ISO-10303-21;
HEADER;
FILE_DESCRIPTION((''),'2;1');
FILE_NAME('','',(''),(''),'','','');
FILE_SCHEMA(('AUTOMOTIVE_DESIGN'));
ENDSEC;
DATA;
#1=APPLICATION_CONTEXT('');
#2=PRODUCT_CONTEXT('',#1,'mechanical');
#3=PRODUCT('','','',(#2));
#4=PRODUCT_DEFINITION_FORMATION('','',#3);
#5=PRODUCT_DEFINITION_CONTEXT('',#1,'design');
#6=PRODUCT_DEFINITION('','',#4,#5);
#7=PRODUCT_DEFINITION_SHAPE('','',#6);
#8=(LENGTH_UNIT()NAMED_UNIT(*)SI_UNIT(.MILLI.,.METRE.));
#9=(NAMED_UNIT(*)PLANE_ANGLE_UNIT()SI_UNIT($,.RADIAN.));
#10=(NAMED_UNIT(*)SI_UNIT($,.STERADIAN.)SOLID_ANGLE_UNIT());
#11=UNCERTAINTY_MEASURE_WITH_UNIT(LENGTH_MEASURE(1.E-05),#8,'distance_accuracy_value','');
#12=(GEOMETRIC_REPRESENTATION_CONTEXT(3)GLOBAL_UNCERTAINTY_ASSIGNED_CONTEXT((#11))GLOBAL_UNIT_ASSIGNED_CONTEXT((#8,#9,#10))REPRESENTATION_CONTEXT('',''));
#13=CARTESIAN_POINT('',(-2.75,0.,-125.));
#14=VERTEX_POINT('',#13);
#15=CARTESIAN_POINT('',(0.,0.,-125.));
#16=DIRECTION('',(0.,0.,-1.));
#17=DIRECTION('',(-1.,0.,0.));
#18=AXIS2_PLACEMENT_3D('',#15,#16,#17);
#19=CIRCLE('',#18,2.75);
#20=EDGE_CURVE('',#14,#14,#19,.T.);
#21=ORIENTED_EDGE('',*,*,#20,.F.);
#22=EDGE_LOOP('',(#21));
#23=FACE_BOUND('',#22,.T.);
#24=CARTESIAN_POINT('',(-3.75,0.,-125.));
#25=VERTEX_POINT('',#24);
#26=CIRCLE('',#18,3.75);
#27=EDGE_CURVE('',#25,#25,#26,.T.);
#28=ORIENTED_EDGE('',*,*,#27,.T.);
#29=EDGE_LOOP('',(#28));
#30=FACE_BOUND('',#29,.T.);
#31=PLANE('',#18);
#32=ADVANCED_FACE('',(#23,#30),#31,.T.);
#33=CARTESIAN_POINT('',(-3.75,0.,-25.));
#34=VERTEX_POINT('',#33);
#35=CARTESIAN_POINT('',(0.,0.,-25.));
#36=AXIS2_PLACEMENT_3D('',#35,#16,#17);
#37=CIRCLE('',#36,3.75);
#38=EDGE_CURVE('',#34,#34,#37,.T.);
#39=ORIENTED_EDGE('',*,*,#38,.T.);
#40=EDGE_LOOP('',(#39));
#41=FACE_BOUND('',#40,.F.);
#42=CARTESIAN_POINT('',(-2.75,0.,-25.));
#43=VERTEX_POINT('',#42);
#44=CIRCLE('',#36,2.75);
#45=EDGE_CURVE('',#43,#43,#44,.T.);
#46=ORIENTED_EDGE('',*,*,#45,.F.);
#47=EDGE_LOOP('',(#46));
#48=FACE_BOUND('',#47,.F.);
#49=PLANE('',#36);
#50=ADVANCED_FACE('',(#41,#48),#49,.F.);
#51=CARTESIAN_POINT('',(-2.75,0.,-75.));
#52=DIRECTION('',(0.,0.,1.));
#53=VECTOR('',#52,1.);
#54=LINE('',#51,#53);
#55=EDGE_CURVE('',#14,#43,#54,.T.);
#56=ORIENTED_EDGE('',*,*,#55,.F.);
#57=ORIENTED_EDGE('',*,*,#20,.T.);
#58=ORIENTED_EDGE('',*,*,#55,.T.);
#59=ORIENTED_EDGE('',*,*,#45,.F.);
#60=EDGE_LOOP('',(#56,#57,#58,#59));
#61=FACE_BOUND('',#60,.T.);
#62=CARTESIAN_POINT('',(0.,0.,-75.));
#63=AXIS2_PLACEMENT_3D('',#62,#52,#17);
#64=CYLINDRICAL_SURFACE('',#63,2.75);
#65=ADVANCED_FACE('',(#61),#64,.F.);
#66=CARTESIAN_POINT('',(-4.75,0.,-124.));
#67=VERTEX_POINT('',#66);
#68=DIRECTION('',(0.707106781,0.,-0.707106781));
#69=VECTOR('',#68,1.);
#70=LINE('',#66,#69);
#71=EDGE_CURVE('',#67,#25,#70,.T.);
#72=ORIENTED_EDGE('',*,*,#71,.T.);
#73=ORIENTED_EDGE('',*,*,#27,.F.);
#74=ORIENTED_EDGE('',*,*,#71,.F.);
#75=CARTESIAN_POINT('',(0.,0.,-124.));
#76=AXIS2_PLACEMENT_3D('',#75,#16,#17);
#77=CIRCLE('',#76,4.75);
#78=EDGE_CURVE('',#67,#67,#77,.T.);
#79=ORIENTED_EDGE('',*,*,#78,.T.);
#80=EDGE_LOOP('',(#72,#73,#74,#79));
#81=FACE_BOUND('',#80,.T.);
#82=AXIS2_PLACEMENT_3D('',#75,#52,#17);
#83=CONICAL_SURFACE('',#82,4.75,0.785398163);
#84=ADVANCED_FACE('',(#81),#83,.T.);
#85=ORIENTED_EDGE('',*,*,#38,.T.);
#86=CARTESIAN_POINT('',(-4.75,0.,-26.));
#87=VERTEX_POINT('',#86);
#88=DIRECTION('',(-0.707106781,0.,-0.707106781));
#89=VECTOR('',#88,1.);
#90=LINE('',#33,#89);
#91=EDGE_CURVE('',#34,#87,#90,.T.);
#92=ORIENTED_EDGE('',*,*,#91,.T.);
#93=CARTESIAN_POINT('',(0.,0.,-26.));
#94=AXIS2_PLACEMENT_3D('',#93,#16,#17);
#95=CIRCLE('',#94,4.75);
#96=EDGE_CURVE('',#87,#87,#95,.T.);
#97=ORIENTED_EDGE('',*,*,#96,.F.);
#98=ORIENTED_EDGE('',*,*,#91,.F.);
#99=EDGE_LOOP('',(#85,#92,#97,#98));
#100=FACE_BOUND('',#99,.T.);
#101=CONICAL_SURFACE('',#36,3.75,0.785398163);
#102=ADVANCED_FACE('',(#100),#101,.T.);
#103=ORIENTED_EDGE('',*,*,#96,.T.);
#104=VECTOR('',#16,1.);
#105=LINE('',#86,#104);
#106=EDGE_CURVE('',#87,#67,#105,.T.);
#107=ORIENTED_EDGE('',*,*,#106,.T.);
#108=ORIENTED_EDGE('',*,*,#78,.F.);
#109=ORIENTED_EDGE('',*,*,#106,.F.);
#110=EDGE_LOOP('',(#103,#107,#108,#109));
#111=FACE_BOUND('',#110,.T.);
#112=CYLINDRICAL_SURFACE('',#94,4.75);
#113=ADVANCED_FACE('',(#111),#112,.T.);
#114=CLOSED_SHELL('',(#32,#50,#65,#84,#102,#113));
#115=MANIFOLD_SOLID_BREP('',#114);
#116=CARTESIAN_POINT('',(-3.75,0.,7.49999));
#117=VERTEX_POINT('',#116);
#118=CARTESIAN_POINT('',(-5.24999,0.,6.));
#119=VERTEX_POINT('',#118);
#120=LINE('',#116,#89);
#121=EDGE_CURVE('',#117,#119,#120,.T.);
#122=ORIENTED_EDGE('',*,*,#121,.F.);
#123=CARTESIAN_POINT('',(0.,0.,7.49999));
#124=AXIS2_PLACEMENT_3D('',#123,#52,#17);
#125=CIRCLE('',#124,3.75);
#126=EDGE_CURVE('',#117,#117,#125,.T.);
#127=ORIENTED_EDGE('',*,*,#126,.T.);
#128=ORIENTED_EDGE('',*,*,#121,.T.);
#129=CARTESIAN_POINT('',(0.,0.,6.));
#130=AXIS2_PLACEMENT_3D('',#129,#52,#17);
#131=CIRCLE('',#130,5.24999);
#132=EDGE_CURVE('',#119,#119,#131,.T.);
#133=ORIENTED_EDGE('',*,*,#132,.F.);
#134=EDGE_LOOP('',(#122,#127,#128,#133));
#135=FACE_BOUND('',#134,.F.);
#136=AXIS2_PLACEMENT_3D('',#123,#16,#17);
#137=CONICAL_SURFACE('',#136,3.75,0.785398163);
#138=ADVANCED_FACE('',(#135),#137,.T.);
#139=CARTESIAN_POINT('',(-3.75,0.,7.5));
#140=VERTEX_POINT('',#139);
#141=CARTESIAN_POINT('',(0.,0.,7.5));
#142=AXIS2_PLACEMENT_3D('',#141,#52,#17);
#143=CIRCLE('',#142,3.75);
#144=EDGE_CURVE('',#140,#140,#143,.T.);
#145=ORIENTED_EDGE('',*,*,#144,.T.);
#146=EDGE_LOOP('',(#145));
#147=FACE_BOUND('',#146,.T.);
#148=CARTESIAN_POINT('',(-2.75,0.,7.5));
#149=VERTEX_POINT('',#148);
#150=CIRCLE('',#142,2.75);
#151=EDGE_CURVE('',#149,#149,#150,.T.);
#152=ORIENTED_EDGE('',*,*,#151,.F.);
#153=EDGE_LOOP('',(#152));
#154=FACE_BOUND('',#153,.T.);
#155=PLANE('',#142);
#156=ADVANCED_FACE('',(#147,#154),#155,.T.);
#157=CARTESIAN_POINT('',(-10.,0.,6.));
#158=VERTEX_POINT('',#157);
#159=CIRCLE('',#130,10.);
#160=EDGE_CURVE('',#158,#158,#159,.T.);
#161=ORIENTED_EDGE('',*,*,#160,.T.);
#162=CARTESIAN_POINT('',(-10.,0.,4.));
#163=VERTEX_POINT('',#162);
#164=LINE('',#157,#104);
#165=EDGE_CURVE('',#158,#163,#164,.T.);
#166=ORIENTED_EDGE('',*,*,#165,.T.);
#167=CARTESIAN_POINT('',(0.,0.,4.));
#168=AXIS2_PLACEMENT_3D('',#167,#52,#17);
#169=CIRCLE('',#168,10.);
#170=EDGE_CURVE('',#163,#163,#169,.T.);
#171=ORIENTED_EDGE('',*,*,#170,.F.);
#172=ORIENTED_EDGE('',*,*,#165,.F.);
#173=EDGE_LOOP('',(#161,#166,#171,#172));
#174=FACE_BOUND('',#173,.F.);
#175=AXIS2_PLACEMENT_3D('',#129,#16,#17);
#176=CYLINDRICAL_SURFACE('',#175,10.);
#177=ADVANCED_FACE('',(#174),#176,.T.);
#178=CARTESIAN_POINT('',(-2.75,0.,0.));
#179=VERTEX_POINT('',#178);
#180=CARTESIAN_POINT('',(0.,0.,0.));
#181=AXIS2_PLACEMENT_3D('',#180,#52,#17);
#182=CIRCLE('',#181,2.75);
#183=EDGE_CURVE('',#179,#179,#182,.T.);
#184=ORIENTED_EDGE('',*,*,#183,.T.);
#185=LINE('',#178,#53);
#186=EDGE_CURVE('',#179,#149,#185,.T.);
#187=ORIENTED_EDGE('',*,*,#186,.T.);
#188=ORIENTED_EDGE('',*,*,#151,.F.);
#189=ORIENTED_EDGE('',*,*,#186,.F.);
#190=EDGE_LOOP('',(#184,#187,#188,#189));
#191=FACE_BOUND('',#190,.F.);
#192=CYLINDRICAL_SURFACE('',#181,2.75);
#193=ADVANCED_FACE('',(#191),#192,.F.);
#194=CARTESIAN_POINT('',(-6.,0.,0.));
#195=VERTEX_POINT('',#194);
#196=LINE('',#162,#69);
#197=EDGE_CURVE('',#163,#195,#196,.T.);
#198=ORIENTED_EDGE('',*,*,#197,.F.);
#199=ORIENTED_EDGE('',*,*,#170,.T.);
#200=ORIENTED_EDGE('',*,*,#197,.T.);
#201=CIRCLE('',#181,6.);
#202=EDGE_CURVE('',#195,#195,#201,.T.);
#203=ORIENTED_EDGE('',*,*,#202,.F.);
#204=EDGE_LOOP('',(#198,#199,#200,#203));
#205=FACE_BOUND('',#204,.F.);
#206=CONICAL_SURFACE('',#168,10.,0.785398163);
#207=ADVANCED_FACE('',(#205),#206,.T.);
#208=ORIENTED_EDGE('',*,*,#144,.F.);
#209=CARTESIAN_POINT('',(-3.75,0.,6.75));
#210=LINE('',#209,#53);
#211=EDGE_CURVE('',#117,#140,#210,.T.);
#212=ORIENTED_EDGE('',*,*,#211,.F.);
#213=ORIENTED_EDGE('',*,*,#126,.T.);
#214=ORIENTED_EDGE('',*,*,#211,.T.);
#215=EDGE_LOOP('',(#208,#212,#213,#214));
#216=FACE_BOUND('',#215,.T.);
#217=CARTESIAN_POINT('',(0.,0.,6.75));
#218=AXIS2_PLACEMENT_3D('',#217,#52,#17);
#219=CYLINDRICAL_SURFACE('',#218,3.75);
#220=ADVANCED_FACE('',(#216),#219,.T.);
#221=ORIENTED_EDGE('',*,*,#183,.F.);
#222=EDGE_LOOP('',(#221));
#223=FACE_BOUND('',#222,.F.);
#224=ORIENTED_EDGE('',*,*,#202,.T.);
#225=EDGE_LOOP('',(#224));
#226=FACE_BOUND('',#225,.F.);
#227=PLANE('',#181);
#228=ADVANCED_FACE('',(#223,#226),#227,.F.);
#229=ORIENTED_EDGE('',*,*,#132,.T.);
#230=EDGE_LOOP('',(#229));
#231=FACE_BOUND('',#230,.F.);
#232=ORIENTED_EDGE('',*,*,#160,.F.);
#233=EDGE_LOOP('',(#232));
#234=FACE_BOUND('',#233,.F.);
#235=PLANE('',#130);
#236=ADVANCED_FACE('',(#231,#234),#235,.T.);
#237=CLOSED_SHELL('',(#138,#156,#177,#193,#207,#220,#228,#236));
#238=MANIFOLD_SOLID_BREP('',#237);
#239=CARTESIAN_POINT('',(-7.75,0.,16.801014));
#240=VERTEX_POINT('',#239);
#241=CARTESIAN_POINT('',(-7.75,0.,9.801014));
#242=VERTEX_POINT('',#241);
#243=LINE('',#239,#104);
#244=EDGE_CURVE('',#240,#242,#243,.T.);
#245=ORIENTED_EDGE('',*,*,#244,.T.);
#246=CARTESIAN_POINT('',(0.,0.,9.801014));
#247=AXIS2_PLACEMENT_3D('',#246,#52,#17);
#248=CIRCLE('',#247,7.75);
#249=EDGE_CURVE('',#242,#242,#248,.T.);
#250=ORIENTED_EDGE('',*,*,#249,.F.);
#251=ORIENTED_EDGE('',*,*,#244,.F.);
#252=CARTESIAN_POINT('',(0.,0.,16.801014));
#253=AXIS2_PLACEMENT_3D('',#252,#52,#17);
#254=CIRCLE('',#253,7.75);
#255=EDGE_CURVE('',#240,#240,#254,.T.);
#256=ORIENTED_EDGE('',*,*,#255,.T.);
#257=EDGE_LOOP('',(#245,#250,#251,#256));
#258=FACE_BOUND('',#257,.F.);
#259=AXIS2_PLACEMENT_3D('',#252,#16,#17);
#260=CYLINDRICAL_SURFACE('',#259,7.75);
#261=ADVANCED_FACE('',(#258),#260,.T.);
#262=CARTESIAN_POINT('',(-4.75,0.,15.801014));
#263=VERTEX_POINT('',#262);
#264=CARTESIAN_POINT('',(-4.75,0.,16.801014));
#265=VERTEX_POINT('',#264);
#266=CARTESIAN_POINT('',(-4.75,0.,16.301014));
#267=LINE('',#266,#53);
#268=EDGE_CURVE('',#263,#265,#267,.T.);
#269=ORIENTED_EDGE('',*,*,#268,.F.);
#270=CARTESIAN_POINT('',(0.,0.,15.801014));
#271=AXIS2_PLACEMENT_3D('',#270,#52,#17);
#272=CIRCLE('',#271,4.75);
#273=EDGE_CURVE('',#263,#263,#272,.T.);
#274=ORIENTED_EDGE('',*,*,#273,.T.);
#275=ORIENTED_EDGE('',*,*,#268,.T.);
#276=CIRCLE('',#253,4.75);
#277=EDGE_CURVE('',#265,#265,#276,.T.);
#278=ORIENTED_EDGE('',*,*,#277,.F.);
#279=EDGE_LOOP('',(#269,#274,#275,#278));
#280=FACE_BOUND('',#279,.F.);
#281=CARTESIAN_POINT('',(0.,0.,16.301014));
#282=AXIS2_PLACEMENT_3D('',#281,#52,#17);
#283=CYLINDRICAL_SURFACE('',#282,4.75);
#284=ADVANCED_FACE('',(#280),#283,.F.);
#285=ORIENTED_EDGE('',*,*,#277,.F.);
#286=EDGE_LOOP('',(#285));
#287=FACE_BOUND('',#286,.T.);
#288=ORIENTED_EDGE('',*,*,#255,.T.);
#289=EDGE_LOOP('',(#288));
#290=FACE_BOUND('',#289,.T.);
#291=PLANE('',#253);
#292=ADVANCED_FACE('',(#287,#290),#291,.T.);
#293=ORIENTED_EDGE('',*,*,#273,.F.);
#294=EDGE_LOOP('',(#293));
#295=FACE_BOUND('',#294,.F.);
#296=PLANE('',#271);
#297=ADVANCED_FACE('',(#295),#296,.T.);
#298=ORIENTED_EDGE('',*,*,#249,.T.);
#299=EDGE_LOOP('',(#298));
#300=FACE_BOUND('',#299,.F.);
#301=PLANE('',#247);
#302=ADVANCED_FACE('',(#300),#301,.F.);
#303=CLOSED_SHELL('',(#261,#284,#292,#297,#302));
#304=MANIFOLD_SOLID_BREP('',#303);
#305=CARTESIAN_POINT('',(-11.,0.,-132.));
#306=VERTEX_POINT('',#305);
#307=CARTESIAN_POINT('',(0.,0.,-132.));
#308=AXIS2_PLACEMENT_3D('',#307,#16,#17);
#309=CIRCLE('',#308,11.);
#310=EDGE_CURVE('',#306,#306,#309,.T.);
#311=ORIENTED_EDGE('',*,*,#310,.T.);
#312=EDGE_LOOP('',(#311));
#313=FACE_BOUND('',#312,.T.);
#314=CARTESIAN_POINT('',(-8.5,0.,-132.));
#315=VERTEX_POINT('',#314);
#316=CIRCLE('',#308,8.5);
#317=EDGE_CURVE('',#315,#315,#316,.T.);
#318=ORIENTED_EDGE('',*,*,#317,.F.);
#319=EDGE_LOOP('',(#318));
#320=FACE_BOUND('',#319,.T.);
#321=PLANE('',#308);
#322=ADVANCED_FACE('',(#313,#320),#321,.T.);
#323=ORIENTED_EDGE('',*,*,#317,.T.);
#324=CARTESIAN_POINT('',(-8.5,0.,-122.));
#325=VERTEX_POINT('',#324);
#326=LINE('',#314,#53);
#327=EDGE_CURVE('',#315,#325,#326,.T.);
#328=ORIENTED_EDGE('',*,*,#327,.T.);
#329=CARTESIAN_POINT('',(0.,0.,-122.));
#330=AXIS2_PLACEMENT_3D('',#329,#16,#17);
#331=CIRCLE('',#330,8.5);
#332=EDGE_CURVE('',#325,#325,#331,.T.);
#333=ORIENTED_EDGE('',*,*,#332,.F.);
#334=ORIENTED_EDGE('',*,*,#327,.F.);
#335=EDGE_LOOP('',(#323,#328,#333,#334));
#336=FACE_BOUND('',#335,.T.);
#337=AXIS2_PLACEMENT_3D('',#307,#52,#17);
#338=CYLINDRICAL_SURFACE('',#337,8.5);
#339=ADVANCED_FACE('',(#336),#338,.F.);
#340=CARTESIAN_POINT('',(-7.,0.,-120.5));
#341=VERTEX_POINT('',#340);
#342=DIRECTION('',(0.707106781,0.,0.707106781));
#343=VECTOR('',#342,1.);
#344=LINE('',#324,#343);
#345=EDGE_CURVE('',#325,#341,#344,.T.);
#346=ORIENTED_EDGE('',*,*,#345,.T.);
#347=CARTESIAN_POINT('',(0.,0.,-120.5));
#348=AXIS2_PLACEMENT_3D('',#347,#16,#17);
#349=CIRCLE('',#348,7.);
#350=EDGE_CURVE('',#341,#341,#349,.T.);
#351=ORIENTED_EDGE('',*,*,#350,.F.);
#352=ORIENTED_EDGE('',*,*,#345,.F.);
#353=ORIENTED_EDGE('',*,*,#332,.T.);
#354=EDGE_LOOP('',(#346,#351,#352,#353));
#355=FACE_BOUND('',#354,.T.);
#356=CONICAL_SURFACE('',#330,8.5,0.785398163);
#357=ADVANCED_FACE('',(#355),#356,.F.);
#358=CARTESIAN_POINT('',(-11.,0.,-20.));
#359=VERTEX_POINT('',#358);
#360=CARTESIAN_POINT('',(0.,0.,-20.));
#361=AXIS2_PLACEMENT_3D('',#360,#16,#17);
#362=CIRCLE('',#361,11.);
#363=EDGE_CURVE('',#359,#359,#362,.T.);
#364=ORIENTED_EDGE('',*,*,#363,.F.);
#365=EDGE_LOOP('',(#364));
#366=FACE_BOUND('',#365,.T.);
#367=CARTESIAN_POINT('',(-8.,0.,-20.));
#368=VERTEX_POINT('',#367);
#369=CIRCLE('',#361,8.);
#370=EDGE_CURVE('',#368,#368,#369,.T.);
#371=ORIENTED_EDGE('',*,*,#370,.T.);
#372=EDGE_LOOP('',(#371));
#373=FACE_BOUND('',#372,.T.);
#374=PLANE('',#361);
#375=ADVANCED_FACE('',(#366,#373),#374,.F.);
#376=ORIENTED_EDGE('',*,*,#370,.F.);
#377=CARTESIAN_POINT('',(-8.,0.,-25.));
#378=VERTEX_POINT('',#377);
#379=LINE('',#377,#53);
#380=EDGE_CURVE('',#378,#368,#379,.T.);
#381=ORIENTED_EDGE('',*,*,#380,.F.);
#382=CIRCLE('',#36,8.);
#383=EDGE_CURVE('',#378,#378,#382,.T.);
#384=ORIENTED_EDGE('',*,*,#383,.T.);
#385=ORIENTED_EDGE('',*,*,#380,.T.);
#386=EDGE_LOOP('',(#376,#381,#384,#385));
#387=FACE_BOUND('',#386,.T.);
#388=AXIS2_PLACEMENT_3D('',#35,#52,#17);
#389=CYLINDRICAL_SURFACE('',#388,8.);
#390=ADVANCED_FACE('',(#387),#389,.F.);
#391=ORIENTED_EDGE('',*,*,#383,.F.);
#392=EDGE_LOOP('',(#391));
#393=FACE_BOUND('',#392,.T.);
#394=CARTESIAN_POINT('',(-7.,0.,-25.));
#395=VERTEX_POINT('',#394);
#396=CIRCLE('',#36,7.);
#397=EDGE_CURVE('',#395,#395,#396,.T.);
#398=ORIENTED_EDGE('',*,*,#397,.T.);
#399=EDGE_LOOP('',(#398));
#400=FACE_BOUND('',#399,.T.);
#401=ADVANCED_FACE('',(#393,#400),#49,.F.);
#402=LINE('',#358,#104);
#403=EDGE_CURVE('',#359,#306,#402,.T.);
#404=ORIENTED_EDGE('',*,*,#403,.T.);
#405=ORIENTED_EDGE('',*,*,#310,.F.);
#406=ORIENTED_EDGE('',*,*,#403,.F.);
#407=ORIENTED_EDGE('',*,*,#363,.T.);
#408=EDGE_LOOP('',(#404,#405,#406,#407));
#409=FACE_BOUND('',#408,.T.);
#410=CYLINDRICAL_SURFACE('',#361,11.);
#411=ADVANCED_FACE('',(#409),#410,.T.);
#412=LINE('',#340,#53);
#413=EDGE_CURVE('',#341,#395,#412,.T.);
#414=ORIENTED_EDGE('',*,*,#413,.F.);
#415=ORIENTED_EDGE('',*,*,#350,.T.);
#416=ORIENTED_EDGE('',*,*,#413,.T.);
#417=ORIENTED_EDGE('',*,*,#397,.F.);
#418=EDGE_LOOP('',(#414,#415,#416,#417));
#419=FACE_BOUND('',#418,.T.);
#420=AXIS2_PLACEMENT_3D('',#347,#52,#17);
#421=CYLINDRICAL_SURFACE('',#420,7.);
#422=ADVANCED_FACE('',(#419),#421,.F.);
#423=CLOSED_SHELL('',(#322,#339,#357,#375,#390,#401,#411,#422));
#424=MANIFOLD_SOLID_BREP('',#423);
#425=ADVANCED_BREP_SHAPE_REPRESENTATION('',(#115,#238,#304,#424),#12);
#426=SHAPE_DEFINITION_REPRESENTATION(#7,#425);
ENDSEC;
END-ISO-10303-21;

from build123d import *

# Parameters (mm, degrees)
F0_W    = 1
F0_H    = 1.5
F2_W    = 1
F2_H    = 100
F6_SIZE = 1.49999
F7_W    = 3
F7_H    = 1


# Not quite as in the source:
# - a fillet or chamfer is up to 0.001 mm smaller than in the source, because OpenCascade refuses the exact size


with BuildPart() as f1:
    # F0 (on Front) → F1 (revolve)
    with BuildSketch(Plane.XZ):
        Polygon((-6, 0), (-2.75, 0), (-2.75, 6), (-3.75, 6), (-10, 6), (-10, 4), align=None)
        with Locations((-3.25, 6.75)):
            Rectangle(F0_W, F0_H)
    revolve(axis=Axis((0, 0, 7.7176861543), (0, 0, 1)))

    # F6 (size 1.5 in the source; OpenCascade refuses exactly that, so slightly less here)
    f6_edges = [f1.edges().sort_by_distance(p)[0] for p in [
        (3.75, 0, 6),
    ]]
    chamfer(f6_edges, length=F6_SIZE)


with BuildPart() as f3:
    # F2 (on Front) → F3 (revolve)
    with BuildSketch(Plane.XZ):
        with Locations((-3.25, -75)):
            Rectangle(F2_W, F2_H)
        Polygon((-4.75, -124), (-3.75, -125), (-3.75, -25), (-4.75, -26), align=None)
    revolve(axis=Axis((0, 0, -10.3056698131), (0, 0, -1)))


with BuildPart() as f5:
    # F4 (on Front) → F5 (revolve)
    with BuildSketch(Plane.XZ):
        Polygon((-8, -20), (-11, -20), (-11, -132), (-8.5, -132), (-8.5, -122), (-7, -120.5), (-7, -25), (-8, -25), align=None)
    revolve(axis=Axis((0, 0, -133.877441287), (0, 0, -1)))


with BuildPart() as f8:
    # F7 (on Front) → F8 (revolve)
    with BuildSketch(Plane.XZ):
        with Locations((-6.25, 16.3010139478)):
            Rectangle(F7_W, F7_H)
        Polygon((-7.75, 9.8010139478), (0, 9.8010139478), (0, 15.8010139478), (-4.75, 15.8010139478), (-7.75, 15.8010139478), align=None)
    revolve(axis=Axis((0, 0, 9.0013529551), (0, 0, 1)))


solid = Compound([f1.part, f3.part, f5.part, f8.part])
